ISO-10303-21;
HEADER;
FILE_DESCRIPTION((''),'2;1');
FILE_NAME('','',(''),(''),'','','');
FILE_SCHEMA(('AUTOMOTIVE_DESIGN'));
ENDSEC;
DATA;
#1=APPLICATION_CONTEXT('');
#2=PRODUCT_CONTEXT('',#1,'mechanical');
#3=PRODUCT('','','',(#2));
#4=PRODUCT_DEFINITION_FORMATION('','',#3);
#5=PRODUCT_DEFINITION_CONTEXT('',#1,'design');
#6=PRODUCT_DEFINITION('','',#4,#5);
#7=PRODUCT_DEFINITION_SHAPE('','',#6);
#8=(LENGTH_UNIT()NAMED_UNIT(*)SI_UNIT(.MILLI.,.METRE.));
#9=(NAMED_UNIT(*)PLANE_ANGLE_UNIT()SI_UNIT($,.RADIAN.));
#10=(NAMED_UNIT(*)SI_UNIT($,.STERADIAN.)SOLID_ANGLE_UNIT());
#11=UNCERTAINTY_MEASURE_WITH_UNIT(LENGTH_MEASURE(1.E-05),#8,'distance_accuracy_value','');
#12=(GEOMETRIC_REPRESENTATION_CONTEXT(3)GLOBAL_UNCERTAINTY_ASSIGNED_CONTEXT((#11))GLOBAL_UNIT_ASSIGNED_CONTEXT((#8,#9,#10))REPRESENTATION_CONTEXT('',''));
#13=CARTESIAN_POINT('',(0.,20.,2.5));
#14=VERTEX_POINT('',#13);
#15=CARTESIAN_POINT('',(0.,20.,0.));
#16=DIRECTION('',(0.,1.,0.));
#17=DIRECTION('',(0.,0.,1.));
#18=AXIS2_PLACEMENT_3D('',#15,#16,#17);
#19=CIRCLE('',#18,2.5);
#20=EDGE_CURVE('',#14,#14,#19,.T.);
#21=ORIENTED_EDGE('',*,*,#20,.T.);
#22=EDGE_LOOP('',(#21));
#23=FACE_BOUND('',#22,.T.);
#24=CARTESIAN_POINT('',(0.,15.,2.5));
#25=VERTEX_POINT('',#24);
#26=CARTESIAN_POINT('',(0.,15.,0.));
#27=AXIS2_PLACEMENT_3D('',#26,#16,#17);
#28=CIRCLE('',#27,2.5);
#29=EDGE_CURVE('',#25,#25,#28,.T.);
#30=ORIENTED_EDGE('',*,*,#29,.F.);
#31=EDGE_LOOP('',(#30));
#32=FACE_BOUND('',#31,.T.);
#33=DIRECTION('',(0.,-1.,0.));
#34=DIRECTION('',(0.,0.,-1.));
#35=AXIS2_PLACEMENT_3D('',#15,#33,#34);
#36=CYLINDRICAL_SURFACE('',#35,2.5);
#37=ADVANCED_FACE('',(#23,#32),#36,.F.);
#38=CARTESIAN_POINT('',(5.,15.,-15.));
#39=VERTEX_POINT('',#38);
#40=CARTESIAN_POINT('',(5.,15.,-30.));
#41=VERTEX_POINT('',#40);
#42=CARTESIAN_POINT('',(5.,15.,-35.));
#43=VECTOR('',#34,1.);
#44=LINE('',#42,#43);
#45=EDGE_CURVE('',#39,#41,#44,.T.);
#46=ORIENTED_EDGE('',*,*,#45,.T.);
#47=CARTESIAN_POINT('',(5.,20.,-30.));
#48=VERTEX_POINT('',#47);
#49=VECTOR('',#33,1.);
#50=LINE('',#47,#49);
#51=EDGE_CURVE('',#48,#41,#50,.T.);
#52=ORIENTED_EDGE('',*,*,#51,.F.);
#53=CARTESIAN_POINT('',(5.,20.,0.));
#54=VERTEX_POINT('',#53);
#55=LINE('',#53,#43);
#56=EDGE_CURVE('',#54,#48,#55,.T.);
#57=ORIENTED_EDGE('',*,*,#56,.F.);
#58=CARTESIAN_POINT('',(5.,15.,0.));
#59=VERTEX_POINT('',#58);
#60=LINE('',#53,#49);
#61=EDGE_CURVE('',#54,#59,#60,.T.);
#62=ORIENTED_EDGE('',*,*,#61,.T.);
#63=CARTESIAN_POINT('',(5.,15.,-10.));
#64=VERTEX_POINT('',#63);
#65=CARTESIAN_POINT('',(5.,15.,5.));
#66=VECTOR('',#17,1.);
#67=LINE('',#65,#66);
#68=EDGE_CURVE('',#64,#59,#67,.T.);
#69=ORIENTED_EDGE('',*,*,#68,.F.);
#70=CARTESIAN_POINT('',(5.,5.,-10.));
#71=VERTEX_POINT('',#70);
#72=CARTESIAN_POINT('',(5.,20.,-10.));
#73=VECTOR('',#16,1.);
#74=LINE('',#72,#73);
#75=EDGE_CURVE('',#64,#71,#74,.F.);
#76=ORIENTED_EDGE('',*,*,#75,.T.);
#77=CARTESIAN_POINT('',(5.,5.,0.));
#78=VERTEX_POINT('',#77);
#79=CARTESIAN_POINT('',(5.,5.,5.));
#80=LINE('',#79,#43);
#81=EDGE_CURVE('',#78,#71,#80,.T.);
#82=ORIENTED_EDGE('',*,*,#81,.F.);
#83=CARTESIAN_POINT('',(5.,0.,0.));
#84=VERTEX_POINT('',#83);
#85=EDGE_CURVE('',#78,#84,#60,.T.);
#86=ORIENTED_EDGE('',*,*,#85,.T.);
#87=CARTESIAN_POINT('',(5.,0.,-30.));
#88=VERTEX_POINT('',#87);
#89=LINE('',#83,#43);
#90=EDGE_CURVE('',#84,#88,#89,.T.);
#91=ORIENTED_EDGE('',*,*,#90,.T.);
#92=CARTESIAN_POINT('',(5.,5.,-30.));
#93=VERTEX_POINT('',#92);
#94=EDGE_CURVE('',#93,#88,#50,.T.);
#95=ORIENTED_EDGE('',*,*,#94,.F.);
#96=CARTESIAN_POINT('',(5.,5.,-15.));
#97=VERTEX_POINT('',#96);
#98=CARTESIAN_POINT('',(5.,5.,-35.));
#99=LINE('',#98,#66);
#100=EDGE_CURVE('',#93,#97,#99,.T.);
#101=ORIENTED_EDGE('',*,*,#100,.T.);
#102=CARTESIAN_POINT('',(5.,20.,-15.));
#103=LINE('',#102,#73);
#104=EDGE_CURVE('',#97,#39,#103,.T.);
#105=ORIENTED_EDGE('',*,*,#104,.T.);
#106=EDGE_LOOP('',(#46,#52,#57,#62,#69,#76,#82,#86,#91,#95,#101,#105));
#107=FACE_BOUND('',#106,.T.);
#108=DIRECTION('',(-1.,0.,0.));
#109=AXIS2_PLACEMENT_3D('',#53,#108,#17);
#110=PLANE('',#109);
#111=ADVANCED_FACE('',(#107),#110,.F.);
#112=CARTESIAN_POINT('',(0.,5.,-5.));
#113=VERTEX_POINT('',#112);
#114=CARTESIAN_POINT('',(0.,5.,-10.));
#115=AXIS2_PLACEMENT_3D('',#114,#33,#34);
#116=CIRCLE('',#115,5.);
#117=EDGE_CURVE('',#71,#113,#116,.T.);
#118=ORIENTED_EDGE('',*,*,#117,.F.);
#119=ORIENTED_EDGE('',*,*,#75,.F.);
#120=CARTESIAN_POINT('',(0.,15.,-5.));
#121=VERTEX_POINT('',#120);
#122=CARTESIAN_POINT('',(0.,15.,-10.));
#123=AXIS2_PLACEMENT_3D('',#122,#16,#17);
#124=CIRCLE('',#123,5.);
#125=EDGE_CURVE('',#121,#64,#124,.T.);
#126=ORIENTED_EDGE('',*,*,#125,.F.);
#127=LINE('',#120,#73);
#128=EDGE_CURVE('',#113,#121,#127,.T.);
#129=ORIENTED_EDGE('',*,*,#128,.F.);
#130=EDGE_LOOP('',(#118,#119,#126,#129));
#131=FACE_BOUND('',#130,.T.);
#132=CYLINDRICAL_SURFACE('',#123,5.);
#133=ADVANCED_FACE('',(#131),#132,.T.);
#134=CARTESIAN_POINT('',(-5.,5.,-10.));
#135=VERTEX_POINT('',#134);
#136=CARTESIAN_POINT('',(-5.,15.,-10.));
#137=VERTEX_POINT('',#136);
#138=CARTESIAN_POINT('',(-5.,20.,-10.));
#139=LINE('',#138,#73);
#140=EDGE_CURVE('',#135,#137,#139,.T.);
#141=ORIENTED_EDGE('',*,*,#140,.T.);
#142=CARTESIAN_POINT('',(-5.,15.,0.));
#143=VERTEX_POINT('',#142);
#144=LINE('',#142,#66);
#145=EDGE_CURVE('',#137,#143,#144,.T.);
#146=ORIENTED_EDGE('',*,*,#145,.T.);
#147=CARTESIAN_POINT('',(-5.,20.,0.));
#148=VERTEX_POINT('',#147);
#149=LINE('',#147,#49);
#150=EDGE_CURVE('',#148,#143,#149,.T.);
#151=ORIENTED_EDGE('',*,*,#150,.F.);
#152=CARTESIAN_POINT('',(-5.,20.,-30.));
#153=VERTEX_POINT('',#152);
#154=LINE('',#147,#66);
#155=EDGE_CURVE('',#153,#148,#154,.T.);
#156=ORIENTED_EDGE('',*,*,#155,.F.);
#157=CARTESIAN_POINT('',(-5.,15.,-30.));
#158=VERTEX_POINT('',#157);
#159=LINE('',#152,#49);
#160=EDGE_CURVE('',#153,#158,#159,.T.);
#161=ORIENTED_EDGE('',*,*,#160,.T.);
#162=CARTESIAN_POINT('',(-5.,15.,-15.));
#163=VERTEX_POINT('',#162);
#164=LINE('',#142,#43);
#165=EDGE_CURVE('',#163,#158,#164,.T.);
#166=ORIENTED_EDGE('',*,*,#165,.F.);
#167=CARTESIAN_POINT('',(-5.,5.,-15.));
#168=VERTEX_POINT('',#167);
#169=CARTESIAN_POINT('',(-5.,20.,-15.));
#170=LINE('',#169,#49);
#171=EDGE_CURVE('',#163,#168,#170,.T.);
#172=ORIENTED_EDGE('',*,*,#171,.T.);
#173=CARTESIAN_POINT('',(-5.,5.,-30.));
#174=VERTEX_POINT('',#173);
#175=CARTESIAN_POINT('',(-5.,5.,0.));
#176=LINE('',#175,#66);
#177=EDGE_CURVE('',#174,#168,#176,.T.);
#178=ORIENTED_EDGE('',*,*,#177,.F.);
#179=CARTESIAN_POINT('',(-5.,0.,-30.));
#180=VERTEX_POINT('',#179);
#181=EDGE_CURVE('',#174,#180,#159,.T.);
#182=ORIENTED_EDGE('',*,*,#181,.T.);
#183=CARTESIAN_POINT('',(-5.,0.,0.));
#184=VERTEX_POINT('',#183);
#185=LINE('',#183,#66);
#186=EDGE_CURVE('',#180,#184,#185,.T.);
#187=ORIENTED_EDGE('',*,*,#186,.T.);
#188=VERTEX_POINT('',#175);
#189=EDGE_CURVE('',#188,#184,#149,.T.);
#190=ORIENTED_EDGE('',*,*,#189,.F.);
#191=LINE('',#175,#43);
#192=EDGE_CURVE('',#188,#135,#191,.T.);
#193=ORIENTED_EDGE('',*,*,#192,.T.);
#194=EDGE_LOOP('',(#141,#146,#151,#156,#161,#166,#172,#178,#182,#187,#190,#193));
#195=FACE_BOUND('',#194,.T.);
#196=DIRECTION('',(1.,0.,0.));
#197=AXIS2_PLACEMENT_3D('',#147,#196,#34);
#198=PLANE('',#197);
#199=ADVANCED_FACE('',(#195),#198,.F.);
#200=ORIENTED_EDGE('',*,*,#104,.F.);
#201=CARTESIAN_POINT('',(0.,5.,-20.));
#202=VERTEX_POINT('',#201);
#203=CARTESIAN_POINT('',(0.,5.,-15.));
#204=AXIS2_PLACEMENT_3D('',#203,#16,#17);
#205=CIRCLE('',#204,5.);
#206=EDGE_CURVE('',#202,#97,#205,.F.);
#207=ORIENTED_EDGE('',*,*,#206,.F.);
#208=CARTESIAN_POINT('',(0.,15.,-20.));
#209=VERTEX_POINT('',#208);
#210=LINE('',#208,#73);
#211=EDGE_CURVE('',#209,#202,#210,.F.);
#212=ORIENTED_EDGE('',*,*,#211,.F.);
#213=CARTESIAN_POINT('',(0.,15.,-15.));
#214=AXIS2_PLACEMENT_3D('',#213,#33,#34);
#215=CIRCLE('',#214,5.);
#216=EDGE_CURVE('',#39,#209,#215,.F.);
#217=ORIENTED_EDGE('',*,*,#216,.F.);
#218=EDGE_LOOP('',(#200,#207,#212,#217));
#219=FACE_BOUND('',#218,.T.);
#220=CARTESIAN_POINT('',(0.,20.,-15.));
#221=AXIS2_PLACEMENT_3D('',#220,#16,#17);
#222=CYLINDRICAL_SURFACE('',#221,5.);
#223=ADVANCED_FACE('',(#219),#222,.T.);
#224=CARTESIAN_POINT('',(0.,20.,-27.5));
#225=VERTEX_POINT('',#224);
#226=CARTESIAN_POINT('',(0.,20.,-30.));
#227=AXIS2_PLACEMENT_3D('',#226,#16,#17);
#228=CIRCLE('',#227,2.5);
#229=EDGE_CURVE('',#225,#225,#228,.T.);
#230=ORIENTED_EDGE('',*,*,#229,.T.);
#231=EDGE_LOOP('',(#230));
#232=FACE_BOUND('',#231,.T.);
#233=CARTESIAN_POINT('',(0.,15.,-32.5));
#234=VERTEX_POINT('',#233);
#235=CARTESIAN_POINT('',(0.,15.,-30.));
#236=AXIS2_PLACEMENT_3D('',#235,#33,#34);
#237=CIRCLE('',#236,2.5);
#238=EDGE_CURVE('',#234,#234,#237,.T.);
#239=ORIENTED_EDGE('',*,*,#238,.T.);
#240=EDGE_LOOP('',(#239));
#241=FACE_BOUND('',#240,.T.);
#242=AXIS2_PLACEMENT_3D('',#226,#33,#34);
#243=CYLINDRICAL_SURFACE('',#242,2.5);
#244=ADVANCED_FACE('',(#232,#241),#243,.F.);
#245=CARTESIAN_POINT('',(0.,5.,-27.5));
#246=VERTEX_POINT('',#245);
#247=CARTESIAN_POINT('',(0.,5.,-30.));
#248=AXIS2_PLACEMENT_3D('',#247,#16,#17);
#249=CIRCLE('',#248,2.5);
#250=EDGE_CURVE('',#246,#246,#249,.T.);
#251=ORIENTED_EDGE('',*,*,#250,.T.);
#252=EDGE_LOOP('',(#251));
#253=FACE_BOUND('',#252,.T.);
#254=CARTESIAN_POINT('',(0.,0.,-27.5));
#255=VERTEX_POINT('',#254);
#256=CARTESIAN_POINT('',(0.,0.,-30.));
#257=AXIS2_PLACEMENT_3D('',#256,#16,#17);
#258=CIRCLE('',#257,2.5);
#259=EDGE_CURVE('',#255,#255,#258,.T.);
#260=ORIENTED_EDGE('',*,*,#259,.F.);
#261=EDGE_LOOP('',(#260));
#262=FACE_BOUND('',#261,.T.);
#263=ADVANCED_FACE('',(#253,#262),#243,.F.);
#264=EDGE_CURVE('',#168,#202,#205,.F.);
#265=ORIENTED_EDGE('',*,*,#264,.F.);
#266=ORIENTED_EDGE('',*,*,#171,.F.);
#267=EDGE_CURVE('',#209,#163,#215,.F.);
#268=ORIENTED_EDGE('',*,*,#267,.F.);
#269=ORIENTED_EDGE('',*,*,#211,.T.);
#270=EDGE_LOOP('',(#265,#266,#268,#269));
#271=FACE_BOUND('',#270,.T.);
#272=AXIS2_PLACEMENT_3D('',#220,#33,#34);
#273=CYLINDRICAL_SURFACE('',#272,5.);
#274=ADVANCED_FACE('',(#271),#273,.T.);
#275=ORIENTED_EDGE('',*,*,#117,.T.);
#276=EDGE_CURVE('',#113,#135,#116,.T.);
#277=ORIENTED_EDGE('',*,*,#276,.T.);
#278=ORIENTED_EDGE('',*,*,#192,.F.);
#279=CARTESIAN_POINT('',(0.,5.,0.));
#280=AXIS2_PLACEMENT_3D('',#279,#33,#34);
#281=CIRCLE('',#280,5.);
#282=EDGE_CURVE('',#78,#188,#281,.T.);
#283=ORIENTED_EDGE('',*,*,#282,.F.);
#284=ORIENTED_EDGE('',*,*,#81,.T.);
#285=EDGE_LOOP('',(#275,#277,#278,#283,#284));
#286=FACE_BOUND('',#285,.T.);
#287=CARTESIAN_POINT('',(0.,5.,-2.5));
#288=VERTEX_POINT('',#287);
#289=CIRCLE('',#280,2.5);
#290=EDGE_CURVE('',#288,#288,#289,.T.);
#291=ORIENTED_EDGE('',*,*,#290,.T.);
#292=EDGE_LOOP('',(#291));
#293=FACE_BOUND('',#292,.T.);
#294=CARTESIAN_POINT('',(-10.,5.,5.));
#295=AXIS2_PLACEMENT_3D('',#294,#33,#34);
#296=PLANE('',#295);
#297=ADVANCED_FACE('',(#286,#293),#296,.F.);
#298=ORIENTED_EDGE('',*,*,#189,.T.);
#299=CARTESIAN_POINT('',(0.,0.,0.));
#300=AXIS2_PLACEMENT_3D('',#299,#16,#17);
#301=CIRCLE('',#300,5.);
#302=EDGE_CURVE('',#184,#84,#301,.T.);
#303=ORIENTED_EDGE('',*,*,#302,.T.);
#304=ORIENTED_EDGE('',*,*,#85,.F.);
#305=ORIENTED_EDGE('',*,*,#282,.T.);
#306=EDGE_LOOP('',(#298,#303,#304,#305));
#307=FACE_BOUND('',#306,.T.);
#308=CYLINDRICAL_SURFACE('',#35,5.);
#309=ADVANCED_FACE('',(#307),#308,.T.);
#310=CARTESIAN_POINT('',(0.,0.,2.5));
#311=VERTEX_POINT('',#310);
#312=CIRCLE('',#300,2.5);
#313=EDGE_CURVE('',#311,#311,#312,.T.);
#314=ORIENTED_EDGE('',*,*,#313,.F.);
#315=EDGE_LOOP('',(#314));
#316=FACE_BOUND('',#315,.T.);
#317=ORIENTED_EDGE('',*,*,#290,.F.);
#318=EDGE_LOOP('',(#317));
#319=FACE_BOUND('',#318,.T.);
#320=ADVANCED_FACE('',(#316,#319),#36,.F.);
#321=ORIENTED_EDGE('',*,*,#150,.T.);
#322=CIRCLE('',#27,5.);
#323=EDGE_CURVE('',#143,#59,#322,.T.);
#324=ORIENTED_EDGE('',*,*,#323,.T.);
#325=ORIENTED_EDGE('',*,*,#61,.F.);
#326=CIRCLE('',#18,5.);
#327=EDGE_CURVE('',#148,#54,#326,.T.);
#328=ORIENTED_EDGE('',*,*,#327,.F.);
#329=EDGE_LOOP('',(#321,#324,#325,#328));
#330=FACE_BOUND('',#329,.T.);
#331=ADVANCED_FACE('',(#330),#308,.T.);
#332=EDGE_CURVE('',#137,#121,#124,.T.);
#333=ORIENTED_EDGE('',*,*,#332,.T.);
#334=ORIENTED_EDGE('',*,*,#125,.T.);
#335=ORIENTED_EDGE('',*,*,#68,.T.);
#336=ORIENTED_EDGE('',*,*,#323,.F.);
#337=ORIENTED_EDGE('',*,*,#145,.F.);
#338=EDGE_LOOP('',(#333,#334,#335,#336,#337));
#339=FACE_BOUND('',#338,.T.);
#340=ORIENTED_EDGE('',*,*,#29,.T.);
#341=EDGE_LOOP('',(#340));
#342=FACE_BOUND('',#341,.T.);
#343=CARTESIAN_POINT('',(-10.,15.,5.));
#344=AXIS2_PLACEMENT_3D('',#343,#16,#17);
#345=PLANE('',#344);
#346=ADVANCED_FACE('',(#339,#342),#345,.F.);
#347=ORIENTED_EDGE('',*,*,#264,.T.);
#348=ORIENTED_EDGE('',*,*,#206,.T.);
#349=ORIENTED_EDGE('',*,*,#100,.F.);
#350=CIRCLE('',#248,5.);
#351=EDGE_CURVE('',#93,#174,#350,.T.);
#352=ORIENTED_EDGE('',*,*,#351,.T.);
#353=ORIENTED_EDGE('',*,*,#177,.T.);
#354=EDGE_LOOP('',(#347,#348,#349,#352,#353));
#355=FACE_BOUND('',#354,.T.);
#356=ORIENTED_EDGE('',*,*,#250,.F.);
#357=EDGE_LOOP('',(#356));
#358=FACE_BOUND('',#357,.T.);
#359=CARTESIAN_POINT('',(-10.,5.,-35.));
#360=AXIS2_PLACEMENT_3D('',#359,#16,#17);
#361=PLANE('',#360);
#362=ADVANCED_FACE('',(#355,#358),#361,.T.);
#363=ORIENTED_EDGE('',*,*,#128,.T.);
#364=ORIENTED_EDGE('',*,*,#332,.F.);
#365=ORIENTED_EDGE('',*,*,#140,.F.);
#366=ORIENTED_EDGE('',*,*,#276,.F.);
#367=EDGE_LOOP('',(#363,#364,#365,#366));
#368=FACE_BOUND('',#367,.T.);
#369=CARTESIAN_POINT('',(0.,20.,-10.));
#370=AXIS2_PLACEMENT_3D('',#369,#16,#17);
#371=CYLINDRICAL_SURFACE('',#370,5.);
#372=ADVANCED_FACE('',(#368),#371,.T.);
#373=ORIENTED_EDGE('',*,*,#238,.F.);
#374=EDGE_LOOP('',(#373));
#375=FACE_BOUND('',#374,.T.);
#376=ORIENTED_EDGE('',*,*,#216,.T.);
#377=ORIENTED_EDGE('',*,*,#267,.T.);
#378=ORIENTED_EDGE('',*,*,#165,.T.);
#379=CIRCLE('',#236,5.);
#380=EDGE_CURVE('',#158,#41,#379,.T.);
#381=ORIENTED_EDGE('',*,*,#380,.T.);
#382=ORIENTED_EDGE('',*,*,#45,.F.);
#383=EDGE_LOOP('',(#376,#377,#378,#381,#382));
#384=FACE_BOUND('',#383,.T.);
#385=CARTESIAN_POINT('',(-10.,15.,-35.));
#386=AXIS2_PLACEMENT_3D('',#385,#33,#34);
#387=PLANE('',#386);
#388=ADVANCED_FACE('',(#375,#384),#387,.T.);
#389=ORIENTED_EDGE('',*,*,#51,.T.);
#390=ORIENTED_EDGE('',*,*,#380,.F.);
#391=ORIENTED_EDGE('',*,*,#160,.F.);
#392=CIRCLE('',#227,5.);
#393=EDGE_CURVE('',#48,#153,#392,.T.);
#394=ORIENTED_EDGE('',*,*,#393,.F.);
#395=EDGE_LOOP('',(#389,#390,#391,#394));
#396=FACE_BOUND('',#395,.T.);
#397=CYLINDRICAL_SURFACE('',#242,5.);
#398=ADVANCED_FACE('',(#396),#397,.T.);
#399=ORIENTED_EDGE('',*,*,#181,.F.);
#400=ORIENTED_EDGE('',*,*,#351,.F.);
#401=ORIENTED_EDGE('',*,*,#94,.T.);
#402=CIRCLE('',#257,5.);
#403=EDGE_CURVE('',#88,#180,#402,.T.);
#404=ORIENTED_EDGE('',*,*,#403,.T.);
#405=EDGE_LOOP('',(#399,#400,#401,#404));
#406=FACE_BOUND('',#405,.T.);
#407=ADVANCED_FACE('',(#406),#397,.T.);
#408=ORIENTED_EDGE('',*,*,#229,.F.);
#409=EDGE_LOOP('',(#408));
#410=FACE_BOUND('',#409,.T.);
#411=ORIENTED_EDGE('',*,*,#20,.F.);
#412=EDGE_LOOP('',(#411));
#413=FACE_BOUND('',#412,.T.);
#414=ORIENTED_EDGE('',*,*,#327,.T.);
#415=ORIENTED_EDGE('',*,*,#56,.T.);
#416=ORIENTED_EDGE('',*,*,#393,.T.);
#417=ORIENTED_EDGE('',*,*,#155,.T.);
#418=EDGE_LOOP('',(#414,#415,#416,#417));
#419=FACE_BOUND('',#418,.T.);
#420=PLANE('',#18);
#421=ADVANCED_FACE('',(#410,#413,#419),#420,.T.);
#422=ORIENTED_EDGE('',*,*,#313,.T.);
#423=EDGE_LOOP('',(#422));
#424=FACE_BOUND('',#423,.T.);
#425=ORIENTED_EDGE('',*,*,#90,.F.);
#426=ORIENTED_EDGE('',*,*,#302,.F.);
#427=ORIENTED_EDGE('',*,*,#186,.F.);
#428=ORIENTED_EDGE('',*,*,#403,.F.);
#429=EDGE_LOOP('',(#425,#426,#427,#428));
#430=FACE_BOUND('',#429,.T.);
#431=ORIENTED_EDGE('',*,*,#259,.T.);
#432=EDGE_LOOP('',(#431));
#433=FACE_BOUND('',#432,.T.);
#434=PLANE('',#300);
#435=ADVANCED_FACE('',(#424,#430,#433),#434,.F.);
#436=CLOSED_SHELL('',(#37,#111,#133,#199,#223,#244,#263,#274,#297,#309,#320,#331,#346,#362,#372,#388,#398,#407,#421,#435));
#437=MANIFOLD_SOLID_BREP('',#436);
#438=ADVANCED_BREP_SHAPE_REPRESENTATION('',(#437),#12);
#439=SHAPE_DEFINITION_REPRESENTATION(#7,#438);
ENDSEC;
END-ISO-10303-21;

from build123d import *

# Parameters (mm, degrees)
SKETCH1_R           = 2.5
BOSS_EXTRUDE1_DEPTH = 20
SKETCH2_W           = 10
SKETCH2_H           = 10
CUT_EXTRUDE1_DEPTH  = 15
FILLET1_R           = 5
SKETCH3_W           = 10
SKETCH3_H           = 10
CUT_EXTRUDE3_DEPTH  = 10
FILLET3_R           = 5


with BuildPart() as part:
    # Sketch1 → Boss-Extrude1 (new body)
    with BuildSketch(Plane(origin=(0, 0, 0), x_dir=(1, 0, 0), z_dir=(0, 1, 0))):
        with BuildLine():
            Line((-5, 0), (-5, 30))
            ThreePointArc((-5, 30), (0, 35), (5, 30))
            Line((5, 30), (5, 0))
            ThreePointArc((5, 0), (0, -5), (-5, 0))
        make_face()
        with Locations(Location((0, 30, 0), (0, 0, 270))):
            Circle(SKETCH1_R, mode=Mode.SUBTRACT)
        with Locations(Location((0, 0, 0), (0, 0, 270))):
            Circle(SKETCH1_R, mode=Mode.SUBTRACT)
    extrude(amount=BOSS_EXTRUDE1_DEPTH)

    # Sketch2 → Cut-Extrude1 (cut)
    with BuildSketch(Plane(origin=(5, 0, 0), x_dir=(0, 0, -1), z_dir=(1, 0, 0))):
        with Locations((0, 10)):
            Rectangle(SKETCH2_W, SKETCH2_H)
    cut_extrude1 = extrude(amount=-CUT_EXTRUDE1_DEPTH, mode=Mode.SUBTRACT)

    # Mirror1: Cut-Extrude1 across plane
    add(cut_extrude1.mirror(Plane.XY.offset(-15)), mode=Mode.SUBTRACT)

    # Fillet1
    fillet1_edges = [part.edges().sort_by_distance(p)[0] for p in [
        (-5, 10, -25),
        (5, 10, -25),
        (-5, 10, -5),
        (5, 10, -5),
    ]]
    fillet(fillet1_edges, radius=FILLET1_R - 0.0001)  # a hair under: the kernel refuses the full size

    # Sketch3 → Cut-Extrude3 (cut)
    with BuildSketch(Plane(origin=(5, 0, 0), x_dir=(0, 0, -1), z_dir=(1, 0, 0))):
        with Locations((25, 10)):
            Rectangle(SKETCH3_W, SKETCH3_H)
    extrude(amount=-CUT_EXTRUDE3_DEPTH, mode=Mode.SUBTRACT)

    # Fillet3
    fillet3_edges = [part.edges().sort_by_distance(p)[0] for p in [
        (-5, 10, -20.0001),
        (5, 10, -20.0001),
    ]]
    fillet(fillet3_edges, radius=FILLET3_R - 0.0001)  # a hair under: the kernel refuses the full size


solid = part.part
